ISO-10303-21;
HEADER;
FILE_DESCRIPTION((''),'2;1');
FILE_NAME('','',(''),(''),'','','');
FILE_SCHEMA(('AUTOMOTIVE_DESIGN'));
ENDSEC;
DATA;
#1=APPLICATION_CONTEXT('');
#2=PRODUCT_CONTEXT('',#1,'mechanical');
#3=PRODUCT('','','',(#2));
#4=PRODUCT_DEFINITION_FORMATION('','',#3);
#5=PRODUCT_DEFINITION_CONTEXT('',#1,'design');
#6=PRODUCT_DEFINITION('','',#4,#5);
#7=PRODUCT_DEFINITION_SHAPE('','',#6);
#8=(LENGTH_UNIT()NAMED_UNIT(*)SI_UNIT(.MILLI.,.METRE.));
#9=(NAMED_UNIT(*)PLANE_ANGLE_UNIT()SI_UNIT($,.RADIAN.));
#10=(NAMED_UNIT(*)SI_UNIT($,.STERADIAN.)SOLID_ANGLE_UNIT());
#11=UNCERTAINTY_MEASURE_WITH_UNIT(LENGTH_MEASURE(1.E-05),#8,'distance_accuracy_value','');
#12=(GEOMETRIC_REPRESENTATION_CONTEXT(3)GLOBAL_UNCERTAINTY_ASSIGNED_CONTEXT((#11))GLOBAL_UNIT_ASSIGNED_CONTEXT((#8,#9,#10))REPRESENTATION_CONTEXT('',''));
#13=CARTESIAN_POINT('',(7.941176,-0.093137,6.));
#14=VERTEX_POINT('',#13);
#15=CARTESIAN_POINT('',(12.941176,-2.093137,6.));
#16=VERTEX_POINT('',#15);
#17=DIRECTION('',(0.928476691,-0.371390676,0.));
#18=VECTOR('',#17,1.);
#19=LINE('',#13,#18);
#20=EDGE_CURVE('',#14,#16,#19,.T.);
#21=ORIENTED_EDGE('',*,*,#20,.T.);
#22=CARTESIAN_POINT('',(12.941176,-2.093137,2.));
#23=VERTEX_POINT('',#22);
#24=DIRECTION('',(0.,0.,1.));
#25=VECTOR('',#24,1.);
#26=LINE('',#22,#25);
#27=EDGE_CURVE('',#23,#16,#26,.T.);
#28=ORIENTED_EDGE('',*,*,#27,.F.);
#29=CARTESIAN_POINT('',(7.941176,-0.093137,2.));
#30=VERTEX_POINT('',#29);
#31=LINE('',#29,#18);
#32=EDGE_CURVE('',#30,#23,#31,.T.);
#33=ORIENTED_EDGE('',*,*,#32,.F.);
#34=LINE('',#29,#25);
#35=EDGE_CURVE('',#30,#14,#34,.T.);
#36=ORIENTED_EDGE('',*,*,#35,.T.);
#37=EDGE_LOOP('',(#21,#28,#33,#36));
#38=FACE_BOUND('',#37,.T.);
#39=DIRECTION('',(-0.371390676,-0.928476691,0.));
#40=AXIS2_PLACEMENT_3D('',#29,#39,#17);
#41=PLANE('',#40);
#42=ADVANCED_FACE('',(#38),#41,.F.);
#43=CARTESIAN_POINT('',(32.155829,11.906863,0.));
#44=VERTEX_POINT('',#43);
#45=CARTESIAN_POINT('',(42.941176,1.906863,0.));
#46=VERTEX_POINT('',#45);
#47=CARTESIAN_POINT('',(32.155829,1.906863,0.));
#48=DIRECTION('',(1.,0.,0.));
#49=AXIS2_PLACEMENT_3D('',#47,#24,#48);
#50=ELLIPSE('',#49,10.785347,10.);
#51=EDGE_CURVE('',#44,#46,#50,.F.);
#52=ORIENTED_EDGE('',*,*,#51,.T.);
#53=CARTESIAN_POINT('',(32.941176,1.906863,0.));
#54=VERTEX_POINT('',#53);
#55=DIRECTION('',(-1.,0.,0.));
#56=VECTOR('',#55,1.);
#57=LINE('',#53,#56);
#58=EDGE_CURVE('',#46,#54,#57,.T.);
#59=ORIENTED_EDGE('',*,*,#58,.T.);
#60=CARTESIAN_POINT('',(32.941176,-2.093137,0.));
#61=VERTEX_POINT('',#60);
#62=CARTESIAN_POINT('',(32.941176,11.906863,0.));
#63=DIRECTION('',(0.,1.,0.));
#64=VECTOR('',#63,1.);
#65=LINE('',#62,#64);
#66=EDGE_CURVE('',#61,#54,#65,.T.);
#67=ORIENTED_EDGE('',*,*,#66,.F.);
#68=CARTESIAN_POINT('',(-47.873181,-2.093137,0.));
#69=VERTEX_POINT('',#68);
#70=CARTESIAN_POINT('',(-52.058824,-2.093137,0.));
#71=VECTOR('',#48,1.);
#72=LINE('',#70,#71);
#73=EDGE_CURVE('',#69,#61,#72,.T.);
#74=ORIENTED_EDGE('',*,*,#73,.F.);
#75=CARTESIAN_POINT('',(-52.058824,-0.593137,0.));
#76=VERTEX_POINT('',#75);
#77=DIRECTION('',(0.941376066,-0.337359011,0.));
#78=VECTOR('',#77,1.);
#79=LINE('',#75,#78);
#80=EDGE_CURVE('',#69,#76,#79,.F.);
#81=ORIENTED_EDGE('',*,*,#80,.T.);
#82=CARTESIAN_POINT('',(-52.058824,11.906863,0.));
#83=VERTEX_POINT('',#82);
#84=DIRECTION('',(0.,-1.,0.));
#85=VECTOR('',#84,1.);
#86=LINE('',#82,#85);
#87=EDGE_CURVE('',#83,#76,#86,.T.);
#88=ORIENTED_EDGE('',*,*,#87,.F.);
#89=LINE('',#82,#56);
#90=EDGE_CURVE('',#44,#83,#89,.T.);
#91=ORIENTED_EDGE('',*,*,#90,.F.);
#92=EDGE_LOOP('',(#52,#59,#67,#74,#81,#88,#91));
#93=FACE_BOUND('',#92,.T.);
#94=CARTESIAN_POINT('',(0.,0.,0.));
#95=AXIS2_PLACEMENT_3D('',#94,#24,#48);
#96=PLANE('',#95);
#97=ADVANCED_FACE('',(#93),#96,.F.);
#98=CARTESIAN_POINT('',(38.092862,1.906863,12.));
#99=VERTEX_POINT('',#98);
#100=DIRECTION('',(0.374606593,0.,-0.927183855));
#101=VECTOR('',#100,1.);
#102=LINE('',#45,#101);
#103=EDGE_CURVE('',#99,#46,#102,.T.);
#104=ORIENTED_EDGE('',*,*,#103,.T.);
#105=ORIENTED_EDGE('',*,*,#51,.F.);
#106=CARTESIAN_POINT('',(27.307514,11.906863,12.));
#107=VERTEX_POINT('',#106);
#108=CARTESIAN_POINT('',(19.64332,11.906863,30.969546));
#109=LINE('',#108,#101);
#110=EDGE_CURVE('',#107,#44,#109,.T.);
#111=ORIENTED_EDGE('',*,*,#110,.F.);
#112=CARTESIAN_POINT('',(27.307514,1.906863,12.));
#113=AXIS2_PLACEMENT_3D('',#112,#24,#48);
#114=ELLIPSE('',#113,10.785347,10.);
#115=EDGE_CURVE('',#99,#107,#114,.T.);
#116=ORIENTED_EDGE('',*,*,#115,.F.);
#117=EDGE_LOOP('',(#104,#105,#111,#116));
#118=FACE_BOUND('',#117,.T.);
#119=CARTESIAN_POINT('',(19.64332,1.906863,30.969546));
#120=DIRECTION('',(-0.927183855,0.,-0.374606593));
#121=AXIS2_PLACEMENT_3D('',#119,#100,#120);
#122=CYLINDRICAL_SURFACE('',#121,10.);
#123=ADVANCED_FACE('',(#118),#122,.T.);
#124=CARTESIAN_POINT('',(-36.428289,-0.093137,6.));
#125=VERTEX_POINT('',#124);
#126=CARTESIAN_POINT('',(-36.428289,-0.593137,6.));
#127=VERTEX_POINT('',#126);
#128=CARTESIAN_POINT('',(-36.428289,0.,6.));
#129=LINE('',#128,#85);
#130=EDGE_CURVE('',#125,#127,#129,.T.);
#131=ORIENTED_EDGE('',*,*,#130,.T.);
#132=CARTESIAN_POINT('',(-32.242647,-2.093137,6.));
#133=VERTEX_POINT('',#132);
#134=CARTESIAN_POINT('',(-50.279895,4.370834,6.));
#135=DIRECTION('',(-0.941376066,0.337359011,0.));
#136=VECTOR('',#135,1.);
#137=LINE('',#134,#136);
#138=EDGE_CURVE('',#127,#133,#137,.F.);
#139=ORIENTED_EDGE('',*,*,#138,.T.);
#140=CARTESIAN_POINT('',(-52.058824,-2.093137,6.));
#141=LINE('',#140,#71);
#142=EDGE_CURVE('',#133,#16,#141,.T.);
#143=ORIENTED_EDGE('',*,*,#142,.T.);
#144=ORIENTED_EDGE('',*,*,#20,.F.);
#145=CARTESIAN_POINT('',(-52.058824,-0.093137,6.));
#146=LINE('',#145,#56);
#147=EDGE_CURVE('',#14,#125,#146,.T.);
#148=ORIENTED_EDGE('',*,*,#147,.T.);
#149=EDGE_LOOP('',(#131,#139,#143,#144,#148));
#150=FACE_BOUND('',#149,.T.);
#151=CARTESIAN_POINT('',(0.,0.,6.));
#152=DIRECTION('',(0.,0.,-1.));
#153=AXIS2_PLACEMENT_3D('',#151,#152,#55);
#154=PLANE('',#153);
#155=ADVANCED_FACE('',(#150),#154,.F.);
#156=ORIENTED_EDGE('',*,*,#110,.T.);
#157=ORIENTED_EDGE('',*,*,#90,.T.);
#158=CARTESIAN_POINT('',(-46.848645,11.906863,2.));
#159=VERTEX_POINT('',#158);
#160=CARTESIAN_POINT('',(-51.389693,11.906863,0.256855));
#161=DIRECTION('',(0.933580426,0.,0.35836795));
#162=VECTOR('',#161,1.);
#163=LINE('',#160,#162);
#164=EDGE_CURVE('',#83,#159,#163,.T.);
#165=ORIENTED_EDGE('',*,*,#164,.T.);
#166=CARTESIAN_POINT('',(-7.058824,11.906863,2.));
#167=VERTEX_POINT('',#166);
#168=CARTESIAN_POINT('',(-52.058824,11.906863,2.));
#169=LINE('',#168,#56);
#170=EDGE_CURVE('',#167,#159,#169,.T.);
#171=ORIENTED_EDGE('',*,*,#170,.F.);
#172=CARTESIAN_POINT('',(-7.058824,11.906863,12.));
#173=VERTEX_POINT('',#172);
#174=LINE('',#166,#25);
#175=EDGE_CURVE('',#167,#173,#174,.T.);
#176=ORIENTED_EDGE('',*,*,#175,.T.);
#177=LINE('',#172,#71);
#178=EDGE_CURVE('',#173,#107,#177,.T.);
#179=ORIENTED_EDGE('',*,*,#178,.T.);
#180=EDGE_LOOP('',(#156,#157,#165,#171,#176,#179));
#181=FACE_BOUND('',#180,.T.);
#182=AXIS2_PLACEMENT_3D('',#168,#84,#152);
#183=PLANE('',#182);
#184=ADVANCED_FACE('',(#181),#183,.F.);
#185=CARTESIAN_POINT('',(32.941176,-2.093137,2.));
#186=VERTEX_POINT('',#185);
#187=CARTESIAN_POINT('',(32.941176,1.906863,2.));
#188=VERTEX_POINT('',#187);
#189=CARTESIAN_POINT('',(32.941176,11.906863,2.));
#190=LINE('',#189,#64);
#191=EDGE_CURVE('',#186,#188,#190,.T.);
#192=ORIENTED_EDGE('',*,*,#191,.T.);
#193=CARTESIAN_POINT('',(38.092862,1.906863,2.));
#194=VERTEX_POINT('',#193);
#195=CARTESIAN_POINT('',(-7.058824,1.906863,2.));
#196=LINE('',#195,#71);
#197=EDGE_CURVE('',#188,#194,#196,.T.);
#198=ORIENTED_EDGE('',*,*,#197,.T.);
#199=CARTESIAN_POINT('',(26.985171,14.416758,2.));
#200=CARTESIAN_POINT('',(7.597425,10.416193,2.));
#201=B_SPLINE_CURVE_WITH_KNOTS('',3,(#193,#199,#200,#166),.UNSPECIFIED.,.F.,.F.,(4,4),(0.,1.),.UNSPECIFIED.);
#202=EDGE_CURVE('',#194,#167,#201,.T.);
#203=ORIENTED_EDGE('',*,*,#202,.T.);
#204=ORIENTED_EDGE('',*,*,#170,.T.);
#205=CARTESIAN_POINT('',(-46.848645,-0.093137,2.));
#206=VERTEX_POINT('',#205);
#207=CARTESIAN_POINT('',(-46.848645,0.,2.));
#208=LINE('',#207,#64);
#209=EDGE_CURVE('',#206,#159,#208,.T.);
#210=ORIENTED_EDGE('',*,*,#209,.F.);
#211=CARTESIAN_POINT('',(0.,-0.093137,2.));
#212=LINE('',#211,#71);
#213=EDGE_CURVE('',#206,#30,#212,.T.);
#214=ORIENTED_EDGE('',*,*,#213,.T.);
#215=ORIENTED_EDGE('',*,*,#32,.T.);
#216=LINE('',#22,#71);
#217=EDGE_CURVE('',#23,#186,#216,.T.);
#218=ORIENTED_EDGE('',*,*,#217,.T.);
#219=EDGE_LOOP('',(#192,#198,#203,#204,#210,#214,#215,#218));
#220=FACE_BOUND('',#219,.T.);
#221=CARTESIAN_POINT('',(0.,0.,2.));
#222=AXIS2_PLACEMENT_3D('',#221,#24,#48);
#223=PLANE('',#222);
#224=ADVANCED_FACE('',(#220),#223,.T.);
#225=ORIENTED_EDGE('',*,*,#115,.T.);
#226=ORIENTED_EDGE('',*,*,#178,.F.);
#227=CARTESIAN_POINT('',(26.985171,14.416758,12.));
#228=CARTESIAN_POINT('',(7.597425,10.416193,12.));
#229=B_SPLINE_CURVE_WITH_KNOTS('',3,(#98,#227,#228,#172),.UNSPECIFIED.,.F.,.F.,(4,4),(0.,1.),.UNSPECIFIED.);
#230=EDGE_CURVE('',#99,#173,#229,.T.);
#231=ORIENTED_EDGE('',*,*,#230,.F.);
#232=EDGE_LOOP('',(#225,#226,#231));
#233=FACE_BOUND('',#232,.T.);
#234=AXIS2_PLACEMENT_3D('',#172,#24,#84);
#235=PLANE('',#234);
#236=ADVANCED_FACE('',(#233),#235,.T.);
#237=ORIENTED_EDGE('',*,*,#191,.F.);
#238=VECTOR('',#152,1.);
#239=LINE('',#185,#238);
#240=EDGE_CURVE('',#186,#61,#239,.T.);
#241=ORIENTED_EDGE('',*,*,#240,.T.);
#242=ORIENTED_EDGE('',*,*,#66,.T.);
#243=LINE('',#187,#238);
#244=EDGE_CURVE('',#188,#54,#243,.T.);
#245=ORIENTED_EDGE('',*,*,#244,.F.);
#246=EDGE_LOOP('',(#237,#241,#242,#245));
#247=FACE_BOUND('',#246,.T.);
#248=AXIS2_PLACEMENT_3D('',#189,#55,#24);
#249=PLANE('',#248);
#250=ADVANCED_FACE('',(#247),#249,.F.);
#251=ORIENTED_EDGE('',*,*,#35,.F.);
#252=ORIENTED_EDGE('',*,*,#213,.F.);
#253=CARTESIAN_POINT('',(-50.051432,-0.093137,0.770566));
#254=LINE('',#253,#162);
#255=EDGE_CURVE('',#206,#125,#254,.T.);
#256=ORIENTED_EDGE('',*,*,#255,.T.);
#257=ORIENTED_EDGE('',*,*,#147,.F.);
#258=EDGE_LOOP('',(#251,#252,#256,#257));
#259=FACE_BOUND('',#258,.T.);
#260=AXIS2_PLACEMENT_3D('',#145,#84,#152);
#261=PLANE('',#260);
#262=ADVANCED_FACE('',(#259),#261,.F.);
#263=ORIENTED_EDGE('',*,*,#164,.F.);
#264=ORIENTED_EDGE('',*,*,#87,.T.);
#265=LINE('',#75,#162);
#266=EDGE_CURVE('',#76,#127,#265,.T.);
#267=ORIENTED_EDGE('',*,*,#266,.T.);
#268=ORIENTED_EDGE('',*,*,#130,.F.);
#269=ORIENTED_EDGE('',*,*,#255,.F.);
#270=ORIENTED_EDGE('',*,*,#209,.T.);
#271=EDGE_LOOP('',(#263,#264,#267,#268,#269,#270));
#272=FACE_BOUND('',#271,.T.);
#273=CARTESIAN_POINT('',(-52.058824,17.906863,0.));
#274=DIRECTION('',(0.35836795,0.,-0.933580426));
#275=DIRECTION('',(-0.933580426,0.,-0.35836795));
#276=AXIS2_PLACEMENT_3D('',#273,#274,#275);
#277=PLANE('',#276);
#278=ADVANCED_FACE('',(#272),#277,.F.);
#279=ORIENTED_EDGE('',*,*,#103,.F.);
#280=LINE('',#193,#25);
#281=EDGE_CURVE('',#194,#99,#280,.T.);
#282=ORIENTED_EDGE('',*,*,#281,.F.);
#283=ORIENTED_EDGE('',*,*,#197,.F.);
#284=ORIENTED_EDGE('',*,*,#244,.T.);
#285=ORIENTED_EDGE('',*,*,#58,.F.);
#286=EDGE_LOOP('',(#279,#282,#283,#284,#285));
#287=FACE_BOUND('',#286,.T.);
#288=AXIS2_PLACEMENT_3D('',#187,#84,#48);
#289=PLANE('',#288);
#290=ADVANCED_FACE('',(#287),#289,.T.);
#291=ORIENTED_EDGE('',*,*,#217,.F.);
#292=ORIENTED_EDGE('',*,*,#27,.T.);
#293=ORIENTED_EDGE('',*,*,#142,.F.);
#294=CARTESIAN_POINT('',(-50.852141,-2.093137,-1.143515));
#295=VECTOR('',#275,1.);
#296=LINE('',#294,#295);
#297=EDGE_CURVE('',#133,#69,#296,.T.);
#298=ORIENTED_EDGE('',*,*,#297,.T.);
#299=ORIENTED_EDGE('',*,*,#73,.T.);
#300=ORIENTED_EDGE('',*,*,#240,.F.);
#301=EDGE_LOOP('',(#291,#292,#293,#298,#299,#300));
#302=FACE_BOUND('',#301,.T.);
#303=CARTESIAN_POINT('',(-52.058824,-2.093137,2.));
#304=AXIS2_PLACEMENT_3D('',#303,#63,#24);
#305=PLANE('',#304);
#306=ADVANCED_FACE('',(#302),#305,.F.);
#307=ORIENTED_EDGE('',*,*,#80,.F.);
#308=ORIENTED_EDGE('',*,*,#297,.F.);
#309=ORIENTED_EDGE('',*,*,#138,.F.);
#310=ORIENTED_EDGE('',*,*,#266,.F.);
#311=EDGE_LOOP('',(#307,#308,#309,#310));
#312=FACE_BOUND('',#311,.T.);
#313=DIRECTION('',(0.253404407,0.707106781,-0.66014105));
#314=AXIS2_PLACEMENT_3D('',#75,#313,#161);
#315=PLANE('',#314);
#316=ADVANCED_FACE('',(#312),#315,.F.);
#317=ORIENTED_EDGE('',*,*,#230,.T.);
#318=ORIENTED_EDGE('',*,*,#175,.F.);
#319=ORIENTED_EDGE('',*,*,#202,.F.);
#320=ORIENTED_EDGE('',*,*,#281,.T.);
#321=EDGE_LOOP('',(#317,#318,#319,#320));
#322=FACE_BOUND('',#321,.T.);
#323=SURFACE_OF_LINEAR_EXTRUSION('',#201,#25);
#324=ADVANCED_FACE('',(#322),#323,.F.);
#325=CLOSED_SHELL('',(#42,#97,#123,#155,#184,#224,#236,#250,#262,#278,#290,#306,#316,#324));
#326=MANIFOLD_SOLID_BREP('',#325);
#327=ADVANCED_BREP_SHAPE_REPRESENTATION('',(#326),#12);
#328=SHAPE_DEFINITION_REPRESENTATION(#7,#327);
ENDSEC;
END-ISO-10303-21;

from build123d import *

# Parameters (mm, degrees)
SKETCH1_W           = 85
SKETCH1_H           = 14
BOSS_EXTRUDE1_DEPTH = 2
SKETCH2_W           = 85
SKETCH2_H           = 2
BOSS_EXTRUDE2_DEPTH = 6
CUT_EXTRUDE1_DEPTH  = 4
SKETCH4_W           = 10
SKETCH4_H           = 10
BOSS_EXTRUDE3_DEPTH = 2
CUT_EXTRUDE2_DEPTH  = 20
CHAMFER1_SIZE       = 1.5
SKETCH6_W           = 10
SKETCH6_H           = 10
BOSS_EXTRUDE4_DEPTH = 50
CUT_EXTRUDE3_DEPTH  = 50
FILLET1_R           = 10
CUT_EXTRUDE4_DEPTH  = 10


with BuildPart() as part:
    # Sketch1 → Boss-Extrude1 (new body)
    with BuildSketch(Plane.XY):
        with Locations((-9.558823529, 4.906862745)):
            Rectangle(SKETCH1_W, SKETCH1_H)
    extrude(amount=BOSS_EXTRUDE1_DEPTH)

    # Sketch2 → Boss-Extrude2 (add)
    with BuildSketch(Plane.XY):
        with Locations((-9.558823529, -1.093137255)):
            Rectangle(SKETCH2_W, SKETCH2_H)
    extrude(amount=BOSS_EXTRUDE2_DEPTH)

    # Sketch3 → Cut-Extrude1 (cut)
    with BuildSketch(Plane.XY.offset(6)):
        Polygon((32.941176471, -0.093137255), (7.941176471, -0.093137255), (12.941176471, -2.093137255), (32.941176471, -2.093137255), align=None)
    extrude(amount=-CUT_EXTRUDE1_DEPTH, mode=Mode.SUBTRACT)

    # Sketch4 → Boss-Extrude3 (add)
    with BuildSketch(Plane(origin=(0, 0, 0), x_dir=(-1, 0, 0), z_dir=(0, 0, -1))):
        with Locations((-37.941176471, 6.906862745)):
            Rectangle(SKETCH4_W, SKETCH4_H)
    extrude(amount=-BOSS_EXTRUDE3_DEPTH)

    # Sketch5 → Cut-Extrude2 (cut)
    with BuildSketch(Plane.XZ.offset(2.093137255)):
        Polygon((-52.058823529, 0), (-36.428289141, 6), (-52.058823529, 6), align=None)
    extrude(amount=-CUT_EXTRUDE2_DEPTH, mode=Mode.SUBTRACT)

    # Chamfer1
    chamfer1_edges = [part.edges().sort_by_distance(p)[0] for p in [
        (-44.243556335, -2.093137255, 3),
    ]]
    chamfer(chamfer1_edges, length=CHAMFER1_SIZE)

    # Sketch6 → Boss-Extrude4 (add)
    with BuildSketch(Plane(origin=(42.941176471, 0, 0), x_dir=(0, 0, -1), z_dir=(1, 0, 0))):
        with Locations((-7, 6.906862745)):
            Rectangle(SKETCH6_W, SKETCH6_H)
    extrude(amount=-BOSS_EXTRUDE4_DEPTH)

    # Sketch7 → Cut-Extrude3 (cut)
    with BuildSketch(Plane.XZ.offset(-1.906862745)):
        Polygon((42.941176471, 0), (38.092861761, 12), (42.941176471, 12), align=None)
    extrude(amount=-CUT_EXTRUDE3_DEPTH, mode=Mode.SUBTRACT)

    # Fillet1
    fillet1_edges = [part.edges().sort_by_distance(p)[0] for p in [
        (40.517019116, 11.906862745, 6),
    ]]
    fillet(fillet1_edges, radius=FILLET1_R - 0.0001)  # a hair under: the kernel refuses the full size

    # Sketch8 → Cut-Extrude4 (cut)
    with BuildSketch(Plane.XY.offset(12)):
        with BuildLine():
            Line((-7.058823529, 11.906862745), (-7.058823529, 1.906862745))
            Line((-7.058823529, 1.906862745), (38.092861761, 1.906862745))
            add(Edge.make_bspline(
                [(-7.058823529, 11.906862745), (7.597424673, 10.416193164), (26.985171478, 14.416758063), (38.092861761, 1.906862745)],
                knots=[0, 0, 0, 0, 1, 1, 1, 1], degree=3))
        make_face()
    extrude(amount=-CUT_EXTRUDE4_DEPTH, mode=Mode.SUBTRACT)


solid = part.part
